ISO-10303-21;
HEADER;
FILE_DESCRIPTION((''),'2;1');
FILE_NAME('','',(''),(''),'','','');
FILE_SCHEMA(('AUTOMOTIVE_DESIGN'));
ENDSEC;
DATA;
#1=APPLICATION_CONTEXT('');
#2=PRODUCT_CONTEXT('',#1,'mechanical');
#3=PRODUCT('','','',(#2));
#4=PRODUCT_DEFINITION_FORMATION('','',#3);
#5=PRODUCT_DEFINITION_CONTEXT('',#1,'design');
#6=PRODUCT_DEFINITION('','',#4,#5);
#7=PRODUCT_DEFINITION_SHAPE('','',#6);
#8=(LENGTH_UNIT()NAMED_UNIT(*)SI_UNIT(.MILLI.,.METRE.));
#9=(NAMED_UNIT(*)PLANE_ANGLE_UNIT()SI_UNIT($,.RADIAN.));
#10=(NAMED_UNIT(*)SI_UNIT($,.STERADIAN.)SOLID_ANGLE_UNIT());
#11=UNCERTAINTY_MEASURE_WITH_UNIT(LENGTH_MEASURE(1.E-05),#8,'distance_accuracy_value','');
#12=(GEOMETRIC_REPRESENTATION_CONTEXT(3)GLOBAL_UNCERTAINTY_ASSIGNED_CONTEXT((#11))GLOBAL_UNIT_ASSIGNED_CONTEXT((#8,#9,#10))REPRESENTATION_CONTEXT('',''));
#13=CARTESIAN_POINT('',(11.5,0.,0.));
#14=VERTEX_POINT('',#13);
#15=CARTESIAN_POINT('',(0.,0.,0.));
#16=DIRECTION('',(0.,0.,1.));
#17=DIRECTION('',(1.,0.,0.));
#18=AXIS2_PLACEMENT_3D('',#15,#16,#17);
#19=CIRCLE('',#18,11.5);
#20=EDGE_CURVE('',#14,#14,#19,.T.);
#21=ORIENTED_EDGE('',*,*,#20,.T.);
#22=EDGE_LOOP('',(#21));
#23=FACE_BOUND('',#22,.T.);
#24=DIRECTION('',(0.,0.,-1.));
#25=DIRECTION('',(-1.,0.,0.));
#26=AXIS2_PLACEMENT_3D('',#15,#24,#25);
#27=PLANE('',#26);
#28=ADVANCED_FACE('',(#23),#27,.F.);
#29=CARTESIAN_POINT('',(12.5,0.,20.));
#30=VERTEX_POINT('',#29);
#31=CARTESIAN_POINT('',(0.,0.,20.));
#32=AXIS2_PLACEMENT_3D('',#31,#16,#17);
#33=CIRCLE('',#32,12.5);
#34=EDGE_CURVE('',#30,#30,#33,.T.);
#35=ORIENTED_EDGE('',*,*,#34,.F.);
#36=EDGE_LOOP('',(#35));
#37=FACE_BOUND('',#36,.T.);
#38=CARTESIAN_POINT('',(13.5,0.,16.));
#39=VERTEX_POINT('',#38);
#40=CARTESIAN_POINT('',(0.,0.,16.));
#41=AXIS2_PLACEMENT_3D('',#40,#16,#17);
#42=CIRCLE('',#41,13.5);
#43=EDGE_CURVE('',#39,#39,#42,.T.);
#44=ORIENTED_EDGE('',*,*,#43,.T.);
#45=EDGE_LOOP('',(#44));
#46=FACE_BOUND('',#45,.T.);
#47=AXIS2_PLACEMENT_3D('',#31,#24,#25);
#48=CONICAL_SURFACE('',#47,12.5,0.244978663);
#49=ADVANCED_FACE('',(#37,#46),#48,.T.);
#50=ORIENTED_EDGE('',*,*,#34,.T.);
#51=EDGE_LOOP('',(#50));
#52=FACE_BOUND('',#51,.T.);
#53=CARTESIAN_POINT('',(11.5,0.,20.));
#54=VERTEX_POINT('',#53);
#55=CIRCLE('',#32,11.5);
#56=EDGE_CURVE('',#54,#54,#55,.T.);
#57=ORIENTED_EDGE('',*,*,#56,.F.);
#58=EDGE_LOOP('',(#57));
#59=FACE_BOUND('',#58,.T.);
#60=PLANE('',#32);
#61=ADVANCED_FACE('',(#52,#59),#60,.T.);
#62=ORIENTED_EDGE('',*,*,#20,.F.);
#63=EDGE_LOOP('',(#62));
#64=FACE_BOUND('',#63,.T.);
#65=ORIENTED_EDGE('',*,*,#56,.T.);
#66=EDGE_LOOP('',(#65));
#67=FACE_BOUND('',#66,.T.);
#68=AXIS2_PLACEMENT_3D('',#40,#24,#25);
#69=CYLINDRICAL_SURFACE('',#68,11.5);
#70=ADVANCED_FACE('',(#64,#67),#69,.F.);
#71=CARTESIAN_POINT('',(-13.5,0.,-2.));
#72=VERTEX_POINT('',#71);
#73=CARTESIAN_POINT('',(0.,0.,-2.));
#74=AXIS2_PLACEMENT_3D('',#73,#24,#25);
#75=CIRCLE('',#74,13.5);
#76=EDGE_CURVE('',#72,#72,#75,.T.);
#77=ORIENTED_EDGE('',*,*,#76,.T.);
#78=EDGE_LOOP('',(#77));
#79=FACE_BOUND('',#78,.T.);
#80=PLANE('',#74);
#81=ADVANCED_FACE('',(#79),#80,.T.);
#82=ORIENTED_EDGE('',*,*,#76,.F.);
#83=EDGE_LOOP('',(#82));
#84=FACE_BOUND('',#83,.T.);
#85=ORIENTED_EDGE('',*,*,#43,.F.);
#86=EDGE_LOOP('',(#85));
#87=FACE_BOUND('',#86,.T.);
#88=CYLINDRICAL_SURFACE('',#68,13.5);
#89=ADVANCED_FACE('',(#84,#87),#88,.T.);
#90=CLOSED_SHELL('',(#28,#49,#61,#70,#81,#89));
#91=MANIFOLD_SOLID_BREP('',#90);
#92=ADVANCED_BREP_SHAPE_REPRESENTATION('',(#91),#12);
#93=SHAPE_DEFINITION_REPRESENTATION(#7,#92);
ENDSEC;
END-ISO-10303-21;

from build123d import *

# Parameters (mm, degrees)
SKETCH1_R           = 13.5
SKETCH1_R_2         = 11.5
EXTRUDE_THIN2_DEPTH = 16
BOSS_EXTRUDE1_START = 2
SKETCH2_R           = 13.5
BOSS_EXTRUDE1_DEPTH = 2
SKETCH3_R           = 12.5
SKETCH3_R_2         = 11.5
EXTRUDE_THIN3_DEPTH = 4
CHAMFER1_SIZE       = 1
CHAMFER1_SIZE_2     = 4


with BuildPart() as part:
    # Sketch1 → Extrude-Thin2 (new body)
    with BuildSketch(Plane.XY):
        Circle(SKETCH1_R)
        Circle(SKETCH1_R_2, mode=Mode.SUBTRACT)
    extrude(amount=EXTRUDE_THIN2_DEPTH)

    # Sketch2 → Boss-Extrude1 (add)
    with BuildSketch(Plane(origin=(0, 0, 0), x_dir=(-1, 0, 0), z_dir=(0, 0, -1)).offset(BOSS_EXTRUDE1_START)):
        Circle(SKETCH2_R)
    extrude(amount=-BOSS_EXTRUDE1_DEPTH)

    # Sketch3 → Extrude-Thin3 (add)
    with BuildSketch(Plane.XY.offset(16)):
        Circle(SKETCH3_R)
        Circle(SKETCH3_R_2, mode=Mode.SUBTRACT)
    extrude(amount=EXTRUDE_THIN3_DEPTH)

    # Chamfer1
    # the kernel refuses this chamfer: 4, 1 mm, written as the material it adds along each edge
    with BuildSketch(Plane(origin=(0, 0, 16), x_dir=(1, 0, 0), z_dir=(0, -1, 0))) as chamfer1_piece_1_section:
        Polygon((12.5 + CHAMFER1_SIZE, 0), (12.5, CHAMFER1_SIZE_2), (12.5, 0), align=None)
    chamfer1_piece_1 = revolve(axis=Axis((0, 0, 16), (0, 0, 1)), mode=Mode.PRIVATE)
    chamfer1_piece_1 = chamfer1_piece_1 & Plane(origin=(0, 0, 17.985898728), x_dir=(1, 0, 0), z_dir=(0, 0, -1)) * Cylinder(13.5, 54, mode=Mode.PRIVATE)
    chamfer1_piece_1 = split(chamfer1_piece_1, bisect_by=Plane(origin=(-12.943594911, 0, 20), z_dir=(0, 0, -1)), keep=Keep.TOP, mode=Mode.PRIVATE)
    add(chamfer1_piece_1)


solid = part.part
